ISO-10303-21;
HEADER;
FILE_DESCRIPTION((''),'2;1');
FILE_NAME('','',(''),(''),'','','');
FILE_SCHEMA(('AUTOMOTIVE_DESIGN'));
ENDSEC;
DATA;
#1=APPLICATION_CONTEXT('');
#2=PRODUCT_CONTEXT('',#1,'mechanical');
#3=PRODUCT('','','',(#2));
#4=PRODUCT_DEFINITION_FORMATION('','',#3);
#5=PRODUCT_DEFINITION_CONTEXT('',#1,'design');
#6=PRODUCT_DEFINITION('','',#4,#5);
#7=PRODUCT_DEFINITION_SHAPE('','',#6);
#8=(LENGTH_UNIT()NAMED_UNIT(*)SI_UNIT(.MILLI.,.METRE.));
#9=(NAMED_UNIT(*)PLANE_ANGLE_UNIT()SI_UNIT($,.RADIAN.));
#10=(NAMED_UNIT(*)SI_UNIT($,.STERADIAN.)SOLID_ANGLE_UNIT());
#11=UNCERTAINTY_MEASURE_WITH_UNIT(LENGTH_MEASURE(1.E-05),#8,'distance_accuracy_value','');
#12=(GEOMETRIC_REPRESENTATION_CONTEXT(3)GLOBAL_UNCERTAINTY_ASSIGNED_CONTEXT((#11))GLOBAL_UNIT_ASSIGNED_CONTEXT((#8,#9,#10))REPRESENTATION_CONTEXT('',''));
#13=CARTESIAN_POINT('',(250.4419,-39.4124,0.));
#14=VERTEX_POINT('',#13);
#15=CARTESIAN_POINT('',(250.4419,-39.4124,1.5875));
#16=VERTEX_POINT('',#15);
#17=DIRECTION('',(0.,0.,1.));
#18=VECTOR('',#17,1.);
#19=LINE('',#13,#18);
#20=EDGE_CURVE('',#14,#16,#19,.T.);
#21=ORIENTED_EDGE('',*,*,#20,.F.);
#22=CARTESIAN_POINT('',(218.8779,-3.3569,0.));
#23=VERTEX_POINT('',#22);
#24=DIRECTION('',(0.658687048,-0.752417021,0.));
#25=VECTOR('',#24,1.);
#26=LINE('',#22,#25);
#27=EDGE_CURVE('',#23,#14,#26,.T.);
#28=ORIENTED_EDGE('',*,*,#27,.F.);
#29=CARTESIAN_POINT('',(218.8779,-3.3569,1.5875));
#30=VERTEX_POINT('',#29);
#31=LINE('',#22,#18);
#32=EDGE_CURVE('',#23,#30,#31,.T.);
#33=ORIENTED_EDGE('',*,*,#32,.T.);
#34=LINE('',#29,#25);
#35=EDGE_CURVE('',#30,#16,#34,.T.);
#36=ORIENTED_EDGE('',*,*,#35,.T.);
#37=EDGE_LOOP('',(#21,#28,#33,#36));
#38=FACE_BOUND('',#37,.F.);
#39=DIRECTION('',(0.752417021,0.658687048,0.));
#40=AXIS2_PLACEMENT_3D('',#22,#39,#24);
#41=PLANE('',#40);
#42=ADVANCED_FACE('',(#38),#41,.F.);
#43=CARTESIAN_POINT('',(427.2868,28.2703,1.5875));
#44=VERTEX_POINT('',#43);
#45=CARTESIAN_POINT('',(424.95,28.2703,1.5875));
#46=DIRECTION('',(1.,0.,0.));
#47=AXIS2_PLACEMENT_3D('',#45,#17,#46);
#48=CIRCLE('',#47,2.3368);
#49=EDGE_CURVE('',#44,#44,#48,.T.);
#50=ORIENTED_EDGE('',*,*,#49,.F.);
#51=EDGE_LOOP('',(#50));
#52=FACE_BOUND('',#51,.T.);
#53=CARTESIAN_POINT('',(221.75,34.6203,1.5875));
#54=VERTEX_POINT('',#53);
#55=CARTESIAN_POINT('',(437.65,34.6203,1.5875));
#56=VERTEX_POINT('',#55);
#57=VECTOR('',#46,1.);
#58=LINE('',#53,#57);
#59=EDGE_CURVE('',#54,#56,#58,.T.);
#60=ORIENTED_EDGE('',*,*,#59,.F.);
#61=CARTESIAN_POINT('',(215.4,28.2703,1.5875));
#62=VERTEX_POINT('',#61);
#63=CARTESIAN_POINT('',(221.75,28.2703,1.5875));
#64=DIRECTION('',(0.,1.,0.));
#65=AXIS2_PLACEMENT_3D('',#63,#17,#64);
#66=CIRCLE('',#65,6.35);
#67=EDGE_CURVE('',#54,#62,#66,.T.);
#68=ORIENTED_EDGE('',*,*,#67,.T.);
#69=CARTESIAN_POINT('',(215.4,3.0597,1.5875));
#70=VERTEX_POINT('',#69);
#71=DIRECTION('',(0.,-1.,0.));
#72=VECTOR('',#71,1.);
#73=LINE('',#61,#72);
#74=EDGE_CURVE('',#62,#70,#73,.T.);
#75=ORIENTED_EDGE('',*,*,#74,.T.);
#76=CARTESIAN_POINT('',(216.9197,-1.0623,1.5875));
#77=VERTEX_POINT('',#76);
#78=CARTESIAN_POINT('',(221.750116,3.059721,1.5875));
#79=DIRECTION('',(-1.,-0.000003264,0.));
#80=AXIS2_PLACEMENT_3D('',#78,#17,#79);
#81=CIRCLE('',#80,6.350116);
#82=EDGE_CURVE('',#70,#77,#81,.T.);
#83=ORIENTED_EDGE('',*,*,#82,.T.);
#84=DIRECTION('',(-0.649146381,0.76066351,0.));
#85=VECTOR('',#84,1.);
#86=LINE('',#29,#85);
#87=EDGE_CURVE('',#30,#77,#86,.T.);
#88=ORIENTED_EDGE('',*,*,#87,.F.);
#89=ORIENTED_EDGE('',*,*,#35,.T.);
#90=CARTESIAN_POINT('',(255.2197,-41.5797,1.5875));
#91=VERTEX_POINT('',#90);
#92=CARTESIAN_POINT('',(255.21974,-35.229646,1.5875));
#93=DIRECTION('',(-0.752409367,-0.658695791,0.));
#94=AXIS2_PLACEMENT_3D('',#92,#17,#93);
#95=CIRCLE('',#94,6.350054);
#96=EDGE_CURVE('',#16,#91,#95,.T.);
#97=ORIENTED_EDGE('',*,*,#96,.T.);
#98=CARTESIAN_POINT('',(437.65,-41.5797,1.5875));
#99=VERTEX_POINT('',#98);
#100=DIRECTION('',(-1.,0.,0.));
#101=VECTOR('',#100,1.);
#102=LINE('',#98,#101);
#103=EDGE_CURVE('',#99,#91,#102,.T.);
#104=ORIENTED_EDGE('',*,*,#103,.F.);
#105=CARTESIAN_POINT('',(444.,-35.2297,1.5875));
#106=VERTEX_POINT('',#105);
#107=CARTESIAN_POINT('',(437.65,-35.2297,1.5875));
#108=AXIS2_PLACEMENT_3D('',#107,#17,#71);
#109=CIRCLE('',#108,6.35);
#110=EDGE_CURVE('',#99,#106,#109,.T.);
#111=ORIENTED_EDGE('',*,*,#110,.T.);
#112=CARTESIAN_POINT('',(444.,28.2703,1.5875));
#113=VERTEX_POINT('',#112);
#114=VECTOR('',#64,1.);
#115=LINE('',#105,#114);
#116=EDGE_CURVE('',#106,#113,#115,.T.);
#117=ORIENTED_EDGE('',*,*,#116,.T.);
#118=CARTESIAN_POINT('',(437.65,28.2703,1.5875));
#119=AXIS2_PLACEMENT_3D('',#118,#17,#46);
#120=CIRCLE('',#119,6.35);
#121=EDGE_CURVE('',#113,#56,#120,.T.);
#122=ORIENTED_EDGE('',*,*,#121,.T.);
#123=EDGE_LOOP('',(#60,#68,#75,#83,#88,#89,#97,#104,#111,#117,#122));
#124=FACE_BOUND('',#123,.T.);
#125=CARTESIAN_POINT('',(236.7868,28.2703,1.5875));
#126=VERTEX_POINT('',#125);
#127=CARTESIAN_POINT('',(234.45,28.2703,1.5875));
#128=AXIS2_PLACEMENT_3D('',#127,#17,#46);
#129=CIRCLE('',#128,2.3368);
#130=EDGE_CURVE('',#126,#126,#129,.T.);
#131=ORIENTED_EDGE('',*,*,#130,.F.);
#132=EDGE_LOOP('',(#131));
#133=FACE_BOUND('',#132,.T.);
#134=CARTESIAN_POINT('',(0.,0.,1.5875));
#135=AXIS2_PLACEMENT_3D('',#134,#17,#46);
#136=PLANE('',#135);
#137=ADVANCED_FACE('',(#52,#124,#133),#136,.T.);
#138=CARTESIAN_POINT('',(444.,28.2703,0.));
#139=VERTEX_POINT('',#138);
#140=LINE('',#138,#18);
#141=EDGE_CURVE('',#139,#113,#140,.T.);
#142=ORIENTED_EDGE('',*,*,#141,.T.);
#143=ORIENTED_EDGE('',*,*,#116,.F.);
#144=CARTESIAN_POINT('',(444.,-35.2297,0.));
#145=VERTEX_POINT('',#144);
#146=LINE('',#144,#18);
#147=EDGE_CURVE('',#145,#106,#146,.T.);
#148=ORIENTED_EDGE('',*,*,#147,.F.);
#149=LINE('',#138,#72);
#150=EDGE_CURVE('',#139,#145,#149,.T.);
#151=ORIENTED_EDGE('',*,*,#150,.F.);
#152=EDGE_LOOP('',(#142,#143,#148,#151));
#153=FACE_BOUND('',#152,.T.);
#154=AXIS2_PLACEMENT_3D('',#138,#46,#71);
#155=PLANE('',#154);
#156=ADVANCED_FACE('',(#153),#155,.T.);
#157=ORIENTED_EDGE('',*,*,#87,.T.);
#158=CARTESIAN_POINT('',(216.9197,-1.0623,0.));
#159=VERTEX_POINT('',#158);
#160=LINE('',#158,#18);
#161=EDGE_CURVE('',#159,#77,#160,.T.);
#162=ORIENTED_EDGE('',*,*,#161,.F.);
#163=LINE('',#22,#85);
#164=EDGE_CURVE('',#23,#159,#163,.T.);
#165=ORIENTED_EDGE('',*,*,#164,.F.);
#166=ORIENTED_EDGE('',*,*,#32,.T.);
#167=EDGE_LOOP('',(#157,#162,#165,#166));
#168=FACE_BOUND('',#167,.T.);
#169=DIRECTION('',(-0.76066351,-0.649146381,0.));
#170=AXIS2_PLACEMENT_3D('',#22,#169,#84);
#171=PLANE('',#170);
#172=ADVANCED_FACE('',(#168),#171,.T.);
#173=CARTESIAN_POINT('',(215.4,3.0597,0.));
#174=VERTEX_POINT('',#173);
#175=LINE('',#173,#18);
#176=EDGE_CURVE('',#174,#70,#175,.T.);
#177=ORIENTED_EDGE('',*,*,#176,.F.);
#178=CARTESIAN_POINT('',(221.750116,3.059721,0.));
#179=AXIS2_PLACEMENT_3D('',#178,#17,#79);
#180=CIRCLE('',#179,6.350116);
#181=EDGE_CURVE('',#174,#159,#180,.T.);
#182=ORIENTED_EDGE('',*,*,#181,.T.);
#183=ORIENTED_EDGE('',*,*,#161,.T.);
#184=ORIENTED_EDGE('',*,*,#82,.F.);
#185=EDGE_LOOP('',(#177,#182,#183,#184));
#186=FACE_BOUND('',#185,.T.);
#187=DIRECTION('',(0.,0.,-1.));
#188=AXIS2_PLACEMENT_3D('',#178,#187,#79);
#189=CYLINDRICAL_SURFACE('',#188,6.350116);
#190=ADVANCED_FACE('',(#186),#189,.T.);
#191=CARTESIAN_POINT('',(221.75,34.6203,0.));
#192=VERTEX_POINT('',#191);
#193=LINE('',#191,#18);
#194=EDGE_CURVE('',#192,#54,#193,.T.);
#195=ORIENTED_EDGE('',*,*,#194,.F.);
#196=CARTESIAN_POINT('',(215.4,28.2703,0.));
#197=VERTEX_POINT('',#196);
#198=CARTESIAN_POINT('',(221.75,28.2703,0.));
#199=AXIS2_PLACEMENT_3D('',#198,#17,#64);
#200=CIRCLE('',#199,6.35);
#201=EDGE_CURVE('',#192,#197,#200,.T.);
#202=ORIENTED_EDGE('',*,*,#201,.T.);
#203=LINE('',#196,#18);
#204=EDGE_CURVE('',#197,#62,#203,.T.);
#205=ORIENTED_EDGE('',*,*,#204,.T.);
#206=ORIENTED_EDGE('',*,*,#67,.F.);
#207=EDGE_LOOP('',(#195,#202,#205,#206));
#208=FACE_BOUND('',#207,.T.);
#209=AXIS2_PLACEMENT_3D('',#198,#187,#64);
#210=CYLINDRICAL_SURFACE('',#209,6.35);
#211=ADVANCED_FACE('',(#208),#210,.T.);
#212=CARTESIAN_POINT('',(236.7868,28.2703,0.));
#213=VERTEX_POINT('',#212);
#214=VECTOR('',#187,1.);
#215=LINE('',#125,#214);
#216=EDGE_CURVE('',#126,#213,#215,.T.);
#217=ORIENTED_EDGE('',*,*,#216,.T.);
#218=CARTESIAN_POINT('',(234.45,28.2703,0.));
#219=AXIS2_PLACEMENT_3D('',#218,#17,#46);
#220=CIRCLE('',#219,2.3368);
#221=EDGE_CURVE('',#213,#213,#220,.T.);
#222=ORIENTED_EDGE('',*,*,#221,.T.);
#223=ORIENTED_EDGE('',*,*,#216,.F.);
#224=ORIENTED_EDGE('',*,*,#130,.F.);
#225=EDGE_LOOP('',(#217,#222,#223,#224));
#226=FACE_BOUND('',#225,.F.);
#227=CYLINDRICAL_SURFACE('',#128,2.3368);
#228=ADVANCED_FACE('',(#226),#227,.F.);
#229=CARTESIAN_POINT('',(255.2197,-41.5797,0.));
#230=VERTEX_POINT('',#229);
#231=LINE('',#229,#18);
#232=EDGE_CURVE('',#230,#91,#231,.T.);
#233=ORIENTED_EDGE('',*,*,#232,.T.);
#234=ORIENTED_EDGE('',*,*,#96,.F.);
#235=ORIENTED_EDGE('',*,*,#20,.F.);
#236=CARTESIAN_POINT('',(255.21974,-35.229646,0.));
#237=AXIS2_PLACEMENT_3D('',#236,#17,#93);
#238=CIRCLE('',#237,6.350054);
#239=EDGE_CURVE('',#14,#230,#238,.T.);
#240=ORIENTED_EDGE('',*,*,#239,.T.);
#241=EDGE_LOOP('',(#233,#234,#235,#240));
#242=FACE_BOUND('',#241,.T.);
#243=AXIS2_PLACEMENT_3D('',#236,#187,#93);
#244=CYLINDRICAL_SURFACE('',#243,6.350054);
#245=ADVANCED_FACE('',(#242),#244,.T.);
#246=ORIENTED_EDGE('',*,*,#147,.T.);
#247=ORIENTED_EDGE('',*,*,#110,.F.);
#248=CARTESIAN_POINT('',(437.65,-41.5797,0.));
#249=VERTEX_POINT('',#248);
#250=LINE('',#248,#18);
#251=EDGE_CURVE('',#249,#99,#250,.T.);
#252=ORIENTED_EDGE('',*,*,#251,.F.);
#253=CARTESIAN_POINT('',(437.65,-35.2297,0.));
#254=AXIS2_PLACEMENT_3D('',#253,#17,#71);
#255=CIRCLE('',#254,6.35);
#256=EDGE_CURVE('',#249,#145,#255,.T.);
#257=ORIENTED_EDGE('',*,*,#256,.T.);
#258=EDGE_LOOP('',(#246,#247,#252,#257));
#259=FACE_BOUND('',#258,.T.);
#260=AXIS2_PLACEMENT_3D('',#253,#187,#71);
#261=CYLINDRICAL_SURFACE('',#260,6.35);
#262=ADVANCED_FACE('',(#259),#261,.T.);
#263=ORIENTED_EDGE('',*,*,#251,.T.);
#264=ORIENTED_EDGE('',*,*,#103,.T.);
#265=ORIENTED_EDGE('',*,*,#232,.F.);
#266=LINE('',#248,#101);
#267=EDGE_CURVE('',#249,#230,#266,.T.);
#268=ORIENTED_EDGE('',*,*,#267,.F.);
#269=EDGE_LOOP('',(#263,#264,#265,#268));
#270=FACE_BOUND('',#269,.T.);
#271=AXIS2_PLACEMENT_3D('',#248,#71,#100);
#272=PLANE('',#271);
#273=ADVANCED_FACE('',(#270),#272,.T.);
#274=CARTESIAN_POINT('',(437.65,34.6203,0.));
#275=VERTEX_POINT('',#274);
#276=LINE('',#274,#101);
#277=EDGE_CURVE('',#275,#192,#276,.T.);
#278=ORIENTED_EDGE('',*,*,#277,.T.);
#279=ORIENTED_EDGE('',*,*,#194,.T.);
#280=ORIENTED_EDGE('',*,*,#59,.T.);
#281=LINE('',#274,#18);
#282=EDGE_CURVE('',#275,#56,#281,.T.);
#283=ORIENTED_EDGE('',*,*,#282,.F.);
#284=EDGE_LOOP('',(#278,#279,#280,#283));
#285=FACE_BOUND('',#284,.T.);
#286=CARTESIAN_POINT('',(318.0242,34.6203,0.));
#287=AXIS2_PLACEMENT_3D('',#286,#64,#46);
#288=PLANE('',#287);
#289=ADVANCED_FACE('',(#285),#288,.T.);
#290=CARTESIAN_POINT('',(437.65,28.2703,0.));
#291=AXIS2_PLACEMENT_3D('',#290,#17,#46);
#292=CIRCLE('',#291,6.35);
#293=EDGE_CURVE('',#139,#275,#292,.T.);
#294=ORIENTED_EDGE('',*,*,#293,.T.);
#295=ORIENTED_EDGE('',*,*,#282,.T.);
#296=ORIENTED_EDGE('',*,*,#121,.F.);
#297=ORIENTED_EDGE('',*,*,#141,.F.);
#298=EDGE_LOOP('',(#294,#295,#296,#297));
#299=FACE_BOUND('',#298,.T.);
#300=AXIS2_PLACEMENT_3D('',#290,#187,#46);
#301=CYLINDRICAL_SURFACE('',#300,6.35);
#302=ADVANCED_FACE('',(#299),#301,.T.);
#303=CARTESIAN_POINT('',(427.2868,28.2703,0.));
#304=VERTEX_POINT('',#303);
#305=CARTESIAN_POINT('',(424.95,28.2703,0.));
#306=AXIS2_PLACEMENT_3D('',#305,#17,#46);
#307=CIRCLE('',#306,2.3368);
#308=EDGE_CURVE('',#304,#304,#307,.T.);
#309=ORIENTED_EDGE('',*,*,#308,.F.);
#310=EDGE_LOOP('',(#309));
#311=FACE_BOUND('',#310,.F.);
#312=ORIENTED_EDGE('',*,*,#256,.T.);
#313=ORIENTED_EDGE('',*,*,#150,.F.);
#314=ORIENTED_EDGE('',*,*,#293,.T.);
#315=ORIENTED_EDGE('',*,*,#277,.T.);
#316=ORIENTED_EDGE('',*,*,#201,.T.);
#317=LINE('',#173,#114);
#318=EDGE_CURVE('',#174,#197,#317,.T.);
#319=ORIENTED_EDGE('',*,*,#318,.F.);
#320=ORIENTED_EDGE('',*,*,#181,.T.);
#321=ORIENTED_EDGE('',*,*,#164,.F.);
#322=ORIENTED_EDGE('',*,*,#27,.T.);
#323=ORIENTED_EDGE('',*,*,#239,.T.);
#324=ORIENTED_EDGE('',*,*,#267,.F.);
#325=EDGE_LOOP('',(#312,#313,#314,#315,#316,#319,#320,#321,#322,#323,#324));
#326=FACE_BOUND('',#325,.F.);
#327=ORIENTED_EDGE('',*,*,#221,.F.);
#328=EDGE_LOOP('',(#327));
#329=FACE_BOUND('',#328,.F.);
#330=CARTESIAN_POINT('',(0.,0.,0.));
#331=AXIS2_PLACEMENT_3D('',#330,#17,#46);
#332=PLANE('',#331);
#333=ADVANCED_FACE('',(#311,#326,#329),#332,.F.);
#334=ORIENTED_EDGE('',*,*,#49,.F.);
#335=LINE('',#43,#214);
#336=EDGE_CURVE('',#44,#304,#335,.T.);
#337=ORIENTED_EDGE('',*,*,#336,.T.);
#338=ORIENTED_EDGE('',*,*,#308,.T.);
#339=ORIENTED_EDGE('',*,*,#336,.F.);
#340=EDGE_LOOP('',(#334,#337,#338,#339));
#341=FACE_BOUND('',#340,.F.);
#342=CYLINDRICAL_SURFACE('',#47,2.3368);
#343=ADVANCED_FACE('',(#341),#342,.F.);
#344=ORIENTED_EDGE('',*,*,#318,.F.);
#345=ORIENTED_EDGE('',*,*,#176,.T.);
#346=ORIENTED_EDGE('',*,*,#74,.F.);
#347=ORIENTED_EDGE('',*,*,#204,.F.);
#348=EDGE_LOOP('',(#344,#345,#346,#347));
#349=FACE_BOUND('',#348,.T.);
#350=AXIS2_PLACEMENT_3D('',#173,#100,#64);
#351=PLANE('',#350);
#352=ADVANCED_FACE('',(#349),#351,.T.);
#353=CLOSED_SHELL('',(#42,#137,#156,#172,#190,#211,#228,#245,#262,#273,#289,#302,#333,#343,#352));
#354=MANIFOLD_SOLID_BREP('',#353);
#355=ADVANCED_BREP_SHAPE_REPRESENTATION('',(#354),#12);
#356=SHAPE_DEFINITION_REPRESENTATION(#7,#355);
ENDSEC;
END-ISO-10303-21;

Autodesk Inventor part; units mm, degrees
ref_plane "YZ Plane" through (0, 0, 0) normal (1, 0, 0) x (0, 1, 0)
ref_plane "XZ Plane" through (0, 0, 0) normal (0, 1, 0) x (-1, 0, 0)
ref_plane "Work Plane1" through (0, 0, 0) normal (0, 0, 1) x (1, 0, 0)
sketch "Sketch1" plane through (0, 0, 0) normal (0, 0, 1) x (1, 0, 0)
  circle A0 centre (228.1, 21.9203) radius 2.3114
  circle A1 centre (431.3, 21.9203) radius 2.3114
  line L0 (318.0242, 34.6203) -> (379.4758, 34.6203)
  line L1 (215.4, 19.6089) -> (215.4, 11.6079)
  line L2 (444, 9.2203) -> (444, 11.6079)
  line L3 (221.75, 34.6203) -> (437.65, 34.6203)
  line L4 (444, 28.2703) -> (444, -35.2297)
  line L5 (437.65, -41.5797) -> (255.2197, -41.5797)
  line L6 (215.4, 3.0597) -> (215.4, 28.2703)
  line L7 (190.0994, 1.6338) -> (231.0454, -48.1215) construction
  arc A2 (437.65, -41.5797) -> (444, -35.2297) centre (437.65, -35.2297) ccw
  arc A3 (221.75, 34.6203) -> (215.4, 28.2703) centre (221.75, 28.2703) ccw
  arc A4 (444, 28.2703) -> (437.65, 34.6203) centre (437.65, 28.2703) ccw
  line L8 (218.8779, -3.3569) -> (250.4419, -39.4124)
  line L9 (218.8779, -3.3569) -> (216.9197, -1.0623)
  arc A5 (250.4419, -39.4124) -> (255.2197, -41.5797) centre (255.2197, -35.2297) ccw
  arc A6 (215.4, 3.0597) -> (216.9197, -1.0623) centre (221.75, 3.0597) ccw
  point P0 (0, 0)
  point P1 (444, -41.5797)
  point P2 (444, 34.6203)
  point P3 (444, 10.4141)
  point P4 (215.4, 15.6084)
  point P5 (379.4758, 34.6203)
  point P6 (252.3392, -41.5797)
  dimension "d0" = 76.2
  dimension "d1" = 0
  dimension "d3" = 0
  dimension "d5" = 6.35
  dimension "d6" = 6.35
  dimension "d19" = 50.8
  dimension "d21" = 6.35
extrude "Plate1" add sketch "Sketch1" along normal blind 1.5875
sketch "Sketch5" plane through (221.75, 34.6203, 1.5875) normal (0, 0, 1) x (1, 0, 0)
  circle A0 centre (6.35, -12.7) radius 2.3114 projected
  circle A1 centre (12.7, -6.35) radius 2.3368
  circle A2 centre (19.05, -12.7) radius 1.5652 construction
  point P0 (-221.75, -34.6203)
  dimension "d22" = 4.6736
  dimension "d31" = 12.7
  dimension "d32" = 6.35
  dimension "d33" = -6.35
sheet face with bend "Face2" sketch "Sketch5" thickness 1.5875 toward (0, 0, -1) bend radius 1.5875 contours A0
bend "Bend1"
extrude "Cut1" cut sketch "Sketch5" against normal blind 1.5875 contours A1
sketch "Sketch6" plane through (0, 0, 1.5875) normal (0, 0, 1) x (1, 0, 0)
  circle A0 centre (424.95, 28.2703) radius 2.3368
  circle A1 centre (418.6, 21.9203) radius 1.1969 construction
  circle A2 centre (431.3, 21.9203) radius 2.3114 projected
  point P0 (0, 0)
  dimension "d34" = 4.6736
  dimension "d35" = 6.35
  dimension "d36" = 0
  dimension "d37" = 12.7
  dimension "d38" = 6.35
sheet face with bend "Face3" sketch "Sketch6" thickness 1.5875 toward (0, 0, -1) bend radius 1.5875 contours A2
bend "Bend2"
extrude "Cut2" cut sketch "Sketch6" against normal blind 1.5875 contours A0
equation "\"d29\" = Thickness"
equation "\"d44\" = Thickness"
equation "\"d7\" = Thickness"
equation "\"d24\" = BendRadius"
equation "\"d25\" = BendReliefWidth"
equation "\"d27\" = MinimumRemnant"
equation "\"d26\" = BendReliefDepth"
equation "\"d28\" = TransitionRadius"
equation "\"d39\" = BendRadius"
equation "\"d40\" = BendReliefWidth"
equation "\"d42\" = MinimumRemnant"
equation "\"d41\" = BendReliefDepth"
equation "\"d43\" = TransitionRadius"
equation "\"BendRadius\" = Thickness"
equation "\"BendReliefWidth\" = Thickness"
equation "\"BendReliefDepth\" = 0.5 * Thickness"
equation "\"CornerReliefSize\" = 4 * Thickness"
equation "\"MinimumRemnant\" = 2 * Thickness"
equation "\"TransitionRadius\" = BendRadius"
equation "\"JacobiRadiusSize\" = BendRadius"
equation "\"GapSize\" = Thickness"
equation "\"Thickness\" = 1.5875"
properties part number "wingpoly"
